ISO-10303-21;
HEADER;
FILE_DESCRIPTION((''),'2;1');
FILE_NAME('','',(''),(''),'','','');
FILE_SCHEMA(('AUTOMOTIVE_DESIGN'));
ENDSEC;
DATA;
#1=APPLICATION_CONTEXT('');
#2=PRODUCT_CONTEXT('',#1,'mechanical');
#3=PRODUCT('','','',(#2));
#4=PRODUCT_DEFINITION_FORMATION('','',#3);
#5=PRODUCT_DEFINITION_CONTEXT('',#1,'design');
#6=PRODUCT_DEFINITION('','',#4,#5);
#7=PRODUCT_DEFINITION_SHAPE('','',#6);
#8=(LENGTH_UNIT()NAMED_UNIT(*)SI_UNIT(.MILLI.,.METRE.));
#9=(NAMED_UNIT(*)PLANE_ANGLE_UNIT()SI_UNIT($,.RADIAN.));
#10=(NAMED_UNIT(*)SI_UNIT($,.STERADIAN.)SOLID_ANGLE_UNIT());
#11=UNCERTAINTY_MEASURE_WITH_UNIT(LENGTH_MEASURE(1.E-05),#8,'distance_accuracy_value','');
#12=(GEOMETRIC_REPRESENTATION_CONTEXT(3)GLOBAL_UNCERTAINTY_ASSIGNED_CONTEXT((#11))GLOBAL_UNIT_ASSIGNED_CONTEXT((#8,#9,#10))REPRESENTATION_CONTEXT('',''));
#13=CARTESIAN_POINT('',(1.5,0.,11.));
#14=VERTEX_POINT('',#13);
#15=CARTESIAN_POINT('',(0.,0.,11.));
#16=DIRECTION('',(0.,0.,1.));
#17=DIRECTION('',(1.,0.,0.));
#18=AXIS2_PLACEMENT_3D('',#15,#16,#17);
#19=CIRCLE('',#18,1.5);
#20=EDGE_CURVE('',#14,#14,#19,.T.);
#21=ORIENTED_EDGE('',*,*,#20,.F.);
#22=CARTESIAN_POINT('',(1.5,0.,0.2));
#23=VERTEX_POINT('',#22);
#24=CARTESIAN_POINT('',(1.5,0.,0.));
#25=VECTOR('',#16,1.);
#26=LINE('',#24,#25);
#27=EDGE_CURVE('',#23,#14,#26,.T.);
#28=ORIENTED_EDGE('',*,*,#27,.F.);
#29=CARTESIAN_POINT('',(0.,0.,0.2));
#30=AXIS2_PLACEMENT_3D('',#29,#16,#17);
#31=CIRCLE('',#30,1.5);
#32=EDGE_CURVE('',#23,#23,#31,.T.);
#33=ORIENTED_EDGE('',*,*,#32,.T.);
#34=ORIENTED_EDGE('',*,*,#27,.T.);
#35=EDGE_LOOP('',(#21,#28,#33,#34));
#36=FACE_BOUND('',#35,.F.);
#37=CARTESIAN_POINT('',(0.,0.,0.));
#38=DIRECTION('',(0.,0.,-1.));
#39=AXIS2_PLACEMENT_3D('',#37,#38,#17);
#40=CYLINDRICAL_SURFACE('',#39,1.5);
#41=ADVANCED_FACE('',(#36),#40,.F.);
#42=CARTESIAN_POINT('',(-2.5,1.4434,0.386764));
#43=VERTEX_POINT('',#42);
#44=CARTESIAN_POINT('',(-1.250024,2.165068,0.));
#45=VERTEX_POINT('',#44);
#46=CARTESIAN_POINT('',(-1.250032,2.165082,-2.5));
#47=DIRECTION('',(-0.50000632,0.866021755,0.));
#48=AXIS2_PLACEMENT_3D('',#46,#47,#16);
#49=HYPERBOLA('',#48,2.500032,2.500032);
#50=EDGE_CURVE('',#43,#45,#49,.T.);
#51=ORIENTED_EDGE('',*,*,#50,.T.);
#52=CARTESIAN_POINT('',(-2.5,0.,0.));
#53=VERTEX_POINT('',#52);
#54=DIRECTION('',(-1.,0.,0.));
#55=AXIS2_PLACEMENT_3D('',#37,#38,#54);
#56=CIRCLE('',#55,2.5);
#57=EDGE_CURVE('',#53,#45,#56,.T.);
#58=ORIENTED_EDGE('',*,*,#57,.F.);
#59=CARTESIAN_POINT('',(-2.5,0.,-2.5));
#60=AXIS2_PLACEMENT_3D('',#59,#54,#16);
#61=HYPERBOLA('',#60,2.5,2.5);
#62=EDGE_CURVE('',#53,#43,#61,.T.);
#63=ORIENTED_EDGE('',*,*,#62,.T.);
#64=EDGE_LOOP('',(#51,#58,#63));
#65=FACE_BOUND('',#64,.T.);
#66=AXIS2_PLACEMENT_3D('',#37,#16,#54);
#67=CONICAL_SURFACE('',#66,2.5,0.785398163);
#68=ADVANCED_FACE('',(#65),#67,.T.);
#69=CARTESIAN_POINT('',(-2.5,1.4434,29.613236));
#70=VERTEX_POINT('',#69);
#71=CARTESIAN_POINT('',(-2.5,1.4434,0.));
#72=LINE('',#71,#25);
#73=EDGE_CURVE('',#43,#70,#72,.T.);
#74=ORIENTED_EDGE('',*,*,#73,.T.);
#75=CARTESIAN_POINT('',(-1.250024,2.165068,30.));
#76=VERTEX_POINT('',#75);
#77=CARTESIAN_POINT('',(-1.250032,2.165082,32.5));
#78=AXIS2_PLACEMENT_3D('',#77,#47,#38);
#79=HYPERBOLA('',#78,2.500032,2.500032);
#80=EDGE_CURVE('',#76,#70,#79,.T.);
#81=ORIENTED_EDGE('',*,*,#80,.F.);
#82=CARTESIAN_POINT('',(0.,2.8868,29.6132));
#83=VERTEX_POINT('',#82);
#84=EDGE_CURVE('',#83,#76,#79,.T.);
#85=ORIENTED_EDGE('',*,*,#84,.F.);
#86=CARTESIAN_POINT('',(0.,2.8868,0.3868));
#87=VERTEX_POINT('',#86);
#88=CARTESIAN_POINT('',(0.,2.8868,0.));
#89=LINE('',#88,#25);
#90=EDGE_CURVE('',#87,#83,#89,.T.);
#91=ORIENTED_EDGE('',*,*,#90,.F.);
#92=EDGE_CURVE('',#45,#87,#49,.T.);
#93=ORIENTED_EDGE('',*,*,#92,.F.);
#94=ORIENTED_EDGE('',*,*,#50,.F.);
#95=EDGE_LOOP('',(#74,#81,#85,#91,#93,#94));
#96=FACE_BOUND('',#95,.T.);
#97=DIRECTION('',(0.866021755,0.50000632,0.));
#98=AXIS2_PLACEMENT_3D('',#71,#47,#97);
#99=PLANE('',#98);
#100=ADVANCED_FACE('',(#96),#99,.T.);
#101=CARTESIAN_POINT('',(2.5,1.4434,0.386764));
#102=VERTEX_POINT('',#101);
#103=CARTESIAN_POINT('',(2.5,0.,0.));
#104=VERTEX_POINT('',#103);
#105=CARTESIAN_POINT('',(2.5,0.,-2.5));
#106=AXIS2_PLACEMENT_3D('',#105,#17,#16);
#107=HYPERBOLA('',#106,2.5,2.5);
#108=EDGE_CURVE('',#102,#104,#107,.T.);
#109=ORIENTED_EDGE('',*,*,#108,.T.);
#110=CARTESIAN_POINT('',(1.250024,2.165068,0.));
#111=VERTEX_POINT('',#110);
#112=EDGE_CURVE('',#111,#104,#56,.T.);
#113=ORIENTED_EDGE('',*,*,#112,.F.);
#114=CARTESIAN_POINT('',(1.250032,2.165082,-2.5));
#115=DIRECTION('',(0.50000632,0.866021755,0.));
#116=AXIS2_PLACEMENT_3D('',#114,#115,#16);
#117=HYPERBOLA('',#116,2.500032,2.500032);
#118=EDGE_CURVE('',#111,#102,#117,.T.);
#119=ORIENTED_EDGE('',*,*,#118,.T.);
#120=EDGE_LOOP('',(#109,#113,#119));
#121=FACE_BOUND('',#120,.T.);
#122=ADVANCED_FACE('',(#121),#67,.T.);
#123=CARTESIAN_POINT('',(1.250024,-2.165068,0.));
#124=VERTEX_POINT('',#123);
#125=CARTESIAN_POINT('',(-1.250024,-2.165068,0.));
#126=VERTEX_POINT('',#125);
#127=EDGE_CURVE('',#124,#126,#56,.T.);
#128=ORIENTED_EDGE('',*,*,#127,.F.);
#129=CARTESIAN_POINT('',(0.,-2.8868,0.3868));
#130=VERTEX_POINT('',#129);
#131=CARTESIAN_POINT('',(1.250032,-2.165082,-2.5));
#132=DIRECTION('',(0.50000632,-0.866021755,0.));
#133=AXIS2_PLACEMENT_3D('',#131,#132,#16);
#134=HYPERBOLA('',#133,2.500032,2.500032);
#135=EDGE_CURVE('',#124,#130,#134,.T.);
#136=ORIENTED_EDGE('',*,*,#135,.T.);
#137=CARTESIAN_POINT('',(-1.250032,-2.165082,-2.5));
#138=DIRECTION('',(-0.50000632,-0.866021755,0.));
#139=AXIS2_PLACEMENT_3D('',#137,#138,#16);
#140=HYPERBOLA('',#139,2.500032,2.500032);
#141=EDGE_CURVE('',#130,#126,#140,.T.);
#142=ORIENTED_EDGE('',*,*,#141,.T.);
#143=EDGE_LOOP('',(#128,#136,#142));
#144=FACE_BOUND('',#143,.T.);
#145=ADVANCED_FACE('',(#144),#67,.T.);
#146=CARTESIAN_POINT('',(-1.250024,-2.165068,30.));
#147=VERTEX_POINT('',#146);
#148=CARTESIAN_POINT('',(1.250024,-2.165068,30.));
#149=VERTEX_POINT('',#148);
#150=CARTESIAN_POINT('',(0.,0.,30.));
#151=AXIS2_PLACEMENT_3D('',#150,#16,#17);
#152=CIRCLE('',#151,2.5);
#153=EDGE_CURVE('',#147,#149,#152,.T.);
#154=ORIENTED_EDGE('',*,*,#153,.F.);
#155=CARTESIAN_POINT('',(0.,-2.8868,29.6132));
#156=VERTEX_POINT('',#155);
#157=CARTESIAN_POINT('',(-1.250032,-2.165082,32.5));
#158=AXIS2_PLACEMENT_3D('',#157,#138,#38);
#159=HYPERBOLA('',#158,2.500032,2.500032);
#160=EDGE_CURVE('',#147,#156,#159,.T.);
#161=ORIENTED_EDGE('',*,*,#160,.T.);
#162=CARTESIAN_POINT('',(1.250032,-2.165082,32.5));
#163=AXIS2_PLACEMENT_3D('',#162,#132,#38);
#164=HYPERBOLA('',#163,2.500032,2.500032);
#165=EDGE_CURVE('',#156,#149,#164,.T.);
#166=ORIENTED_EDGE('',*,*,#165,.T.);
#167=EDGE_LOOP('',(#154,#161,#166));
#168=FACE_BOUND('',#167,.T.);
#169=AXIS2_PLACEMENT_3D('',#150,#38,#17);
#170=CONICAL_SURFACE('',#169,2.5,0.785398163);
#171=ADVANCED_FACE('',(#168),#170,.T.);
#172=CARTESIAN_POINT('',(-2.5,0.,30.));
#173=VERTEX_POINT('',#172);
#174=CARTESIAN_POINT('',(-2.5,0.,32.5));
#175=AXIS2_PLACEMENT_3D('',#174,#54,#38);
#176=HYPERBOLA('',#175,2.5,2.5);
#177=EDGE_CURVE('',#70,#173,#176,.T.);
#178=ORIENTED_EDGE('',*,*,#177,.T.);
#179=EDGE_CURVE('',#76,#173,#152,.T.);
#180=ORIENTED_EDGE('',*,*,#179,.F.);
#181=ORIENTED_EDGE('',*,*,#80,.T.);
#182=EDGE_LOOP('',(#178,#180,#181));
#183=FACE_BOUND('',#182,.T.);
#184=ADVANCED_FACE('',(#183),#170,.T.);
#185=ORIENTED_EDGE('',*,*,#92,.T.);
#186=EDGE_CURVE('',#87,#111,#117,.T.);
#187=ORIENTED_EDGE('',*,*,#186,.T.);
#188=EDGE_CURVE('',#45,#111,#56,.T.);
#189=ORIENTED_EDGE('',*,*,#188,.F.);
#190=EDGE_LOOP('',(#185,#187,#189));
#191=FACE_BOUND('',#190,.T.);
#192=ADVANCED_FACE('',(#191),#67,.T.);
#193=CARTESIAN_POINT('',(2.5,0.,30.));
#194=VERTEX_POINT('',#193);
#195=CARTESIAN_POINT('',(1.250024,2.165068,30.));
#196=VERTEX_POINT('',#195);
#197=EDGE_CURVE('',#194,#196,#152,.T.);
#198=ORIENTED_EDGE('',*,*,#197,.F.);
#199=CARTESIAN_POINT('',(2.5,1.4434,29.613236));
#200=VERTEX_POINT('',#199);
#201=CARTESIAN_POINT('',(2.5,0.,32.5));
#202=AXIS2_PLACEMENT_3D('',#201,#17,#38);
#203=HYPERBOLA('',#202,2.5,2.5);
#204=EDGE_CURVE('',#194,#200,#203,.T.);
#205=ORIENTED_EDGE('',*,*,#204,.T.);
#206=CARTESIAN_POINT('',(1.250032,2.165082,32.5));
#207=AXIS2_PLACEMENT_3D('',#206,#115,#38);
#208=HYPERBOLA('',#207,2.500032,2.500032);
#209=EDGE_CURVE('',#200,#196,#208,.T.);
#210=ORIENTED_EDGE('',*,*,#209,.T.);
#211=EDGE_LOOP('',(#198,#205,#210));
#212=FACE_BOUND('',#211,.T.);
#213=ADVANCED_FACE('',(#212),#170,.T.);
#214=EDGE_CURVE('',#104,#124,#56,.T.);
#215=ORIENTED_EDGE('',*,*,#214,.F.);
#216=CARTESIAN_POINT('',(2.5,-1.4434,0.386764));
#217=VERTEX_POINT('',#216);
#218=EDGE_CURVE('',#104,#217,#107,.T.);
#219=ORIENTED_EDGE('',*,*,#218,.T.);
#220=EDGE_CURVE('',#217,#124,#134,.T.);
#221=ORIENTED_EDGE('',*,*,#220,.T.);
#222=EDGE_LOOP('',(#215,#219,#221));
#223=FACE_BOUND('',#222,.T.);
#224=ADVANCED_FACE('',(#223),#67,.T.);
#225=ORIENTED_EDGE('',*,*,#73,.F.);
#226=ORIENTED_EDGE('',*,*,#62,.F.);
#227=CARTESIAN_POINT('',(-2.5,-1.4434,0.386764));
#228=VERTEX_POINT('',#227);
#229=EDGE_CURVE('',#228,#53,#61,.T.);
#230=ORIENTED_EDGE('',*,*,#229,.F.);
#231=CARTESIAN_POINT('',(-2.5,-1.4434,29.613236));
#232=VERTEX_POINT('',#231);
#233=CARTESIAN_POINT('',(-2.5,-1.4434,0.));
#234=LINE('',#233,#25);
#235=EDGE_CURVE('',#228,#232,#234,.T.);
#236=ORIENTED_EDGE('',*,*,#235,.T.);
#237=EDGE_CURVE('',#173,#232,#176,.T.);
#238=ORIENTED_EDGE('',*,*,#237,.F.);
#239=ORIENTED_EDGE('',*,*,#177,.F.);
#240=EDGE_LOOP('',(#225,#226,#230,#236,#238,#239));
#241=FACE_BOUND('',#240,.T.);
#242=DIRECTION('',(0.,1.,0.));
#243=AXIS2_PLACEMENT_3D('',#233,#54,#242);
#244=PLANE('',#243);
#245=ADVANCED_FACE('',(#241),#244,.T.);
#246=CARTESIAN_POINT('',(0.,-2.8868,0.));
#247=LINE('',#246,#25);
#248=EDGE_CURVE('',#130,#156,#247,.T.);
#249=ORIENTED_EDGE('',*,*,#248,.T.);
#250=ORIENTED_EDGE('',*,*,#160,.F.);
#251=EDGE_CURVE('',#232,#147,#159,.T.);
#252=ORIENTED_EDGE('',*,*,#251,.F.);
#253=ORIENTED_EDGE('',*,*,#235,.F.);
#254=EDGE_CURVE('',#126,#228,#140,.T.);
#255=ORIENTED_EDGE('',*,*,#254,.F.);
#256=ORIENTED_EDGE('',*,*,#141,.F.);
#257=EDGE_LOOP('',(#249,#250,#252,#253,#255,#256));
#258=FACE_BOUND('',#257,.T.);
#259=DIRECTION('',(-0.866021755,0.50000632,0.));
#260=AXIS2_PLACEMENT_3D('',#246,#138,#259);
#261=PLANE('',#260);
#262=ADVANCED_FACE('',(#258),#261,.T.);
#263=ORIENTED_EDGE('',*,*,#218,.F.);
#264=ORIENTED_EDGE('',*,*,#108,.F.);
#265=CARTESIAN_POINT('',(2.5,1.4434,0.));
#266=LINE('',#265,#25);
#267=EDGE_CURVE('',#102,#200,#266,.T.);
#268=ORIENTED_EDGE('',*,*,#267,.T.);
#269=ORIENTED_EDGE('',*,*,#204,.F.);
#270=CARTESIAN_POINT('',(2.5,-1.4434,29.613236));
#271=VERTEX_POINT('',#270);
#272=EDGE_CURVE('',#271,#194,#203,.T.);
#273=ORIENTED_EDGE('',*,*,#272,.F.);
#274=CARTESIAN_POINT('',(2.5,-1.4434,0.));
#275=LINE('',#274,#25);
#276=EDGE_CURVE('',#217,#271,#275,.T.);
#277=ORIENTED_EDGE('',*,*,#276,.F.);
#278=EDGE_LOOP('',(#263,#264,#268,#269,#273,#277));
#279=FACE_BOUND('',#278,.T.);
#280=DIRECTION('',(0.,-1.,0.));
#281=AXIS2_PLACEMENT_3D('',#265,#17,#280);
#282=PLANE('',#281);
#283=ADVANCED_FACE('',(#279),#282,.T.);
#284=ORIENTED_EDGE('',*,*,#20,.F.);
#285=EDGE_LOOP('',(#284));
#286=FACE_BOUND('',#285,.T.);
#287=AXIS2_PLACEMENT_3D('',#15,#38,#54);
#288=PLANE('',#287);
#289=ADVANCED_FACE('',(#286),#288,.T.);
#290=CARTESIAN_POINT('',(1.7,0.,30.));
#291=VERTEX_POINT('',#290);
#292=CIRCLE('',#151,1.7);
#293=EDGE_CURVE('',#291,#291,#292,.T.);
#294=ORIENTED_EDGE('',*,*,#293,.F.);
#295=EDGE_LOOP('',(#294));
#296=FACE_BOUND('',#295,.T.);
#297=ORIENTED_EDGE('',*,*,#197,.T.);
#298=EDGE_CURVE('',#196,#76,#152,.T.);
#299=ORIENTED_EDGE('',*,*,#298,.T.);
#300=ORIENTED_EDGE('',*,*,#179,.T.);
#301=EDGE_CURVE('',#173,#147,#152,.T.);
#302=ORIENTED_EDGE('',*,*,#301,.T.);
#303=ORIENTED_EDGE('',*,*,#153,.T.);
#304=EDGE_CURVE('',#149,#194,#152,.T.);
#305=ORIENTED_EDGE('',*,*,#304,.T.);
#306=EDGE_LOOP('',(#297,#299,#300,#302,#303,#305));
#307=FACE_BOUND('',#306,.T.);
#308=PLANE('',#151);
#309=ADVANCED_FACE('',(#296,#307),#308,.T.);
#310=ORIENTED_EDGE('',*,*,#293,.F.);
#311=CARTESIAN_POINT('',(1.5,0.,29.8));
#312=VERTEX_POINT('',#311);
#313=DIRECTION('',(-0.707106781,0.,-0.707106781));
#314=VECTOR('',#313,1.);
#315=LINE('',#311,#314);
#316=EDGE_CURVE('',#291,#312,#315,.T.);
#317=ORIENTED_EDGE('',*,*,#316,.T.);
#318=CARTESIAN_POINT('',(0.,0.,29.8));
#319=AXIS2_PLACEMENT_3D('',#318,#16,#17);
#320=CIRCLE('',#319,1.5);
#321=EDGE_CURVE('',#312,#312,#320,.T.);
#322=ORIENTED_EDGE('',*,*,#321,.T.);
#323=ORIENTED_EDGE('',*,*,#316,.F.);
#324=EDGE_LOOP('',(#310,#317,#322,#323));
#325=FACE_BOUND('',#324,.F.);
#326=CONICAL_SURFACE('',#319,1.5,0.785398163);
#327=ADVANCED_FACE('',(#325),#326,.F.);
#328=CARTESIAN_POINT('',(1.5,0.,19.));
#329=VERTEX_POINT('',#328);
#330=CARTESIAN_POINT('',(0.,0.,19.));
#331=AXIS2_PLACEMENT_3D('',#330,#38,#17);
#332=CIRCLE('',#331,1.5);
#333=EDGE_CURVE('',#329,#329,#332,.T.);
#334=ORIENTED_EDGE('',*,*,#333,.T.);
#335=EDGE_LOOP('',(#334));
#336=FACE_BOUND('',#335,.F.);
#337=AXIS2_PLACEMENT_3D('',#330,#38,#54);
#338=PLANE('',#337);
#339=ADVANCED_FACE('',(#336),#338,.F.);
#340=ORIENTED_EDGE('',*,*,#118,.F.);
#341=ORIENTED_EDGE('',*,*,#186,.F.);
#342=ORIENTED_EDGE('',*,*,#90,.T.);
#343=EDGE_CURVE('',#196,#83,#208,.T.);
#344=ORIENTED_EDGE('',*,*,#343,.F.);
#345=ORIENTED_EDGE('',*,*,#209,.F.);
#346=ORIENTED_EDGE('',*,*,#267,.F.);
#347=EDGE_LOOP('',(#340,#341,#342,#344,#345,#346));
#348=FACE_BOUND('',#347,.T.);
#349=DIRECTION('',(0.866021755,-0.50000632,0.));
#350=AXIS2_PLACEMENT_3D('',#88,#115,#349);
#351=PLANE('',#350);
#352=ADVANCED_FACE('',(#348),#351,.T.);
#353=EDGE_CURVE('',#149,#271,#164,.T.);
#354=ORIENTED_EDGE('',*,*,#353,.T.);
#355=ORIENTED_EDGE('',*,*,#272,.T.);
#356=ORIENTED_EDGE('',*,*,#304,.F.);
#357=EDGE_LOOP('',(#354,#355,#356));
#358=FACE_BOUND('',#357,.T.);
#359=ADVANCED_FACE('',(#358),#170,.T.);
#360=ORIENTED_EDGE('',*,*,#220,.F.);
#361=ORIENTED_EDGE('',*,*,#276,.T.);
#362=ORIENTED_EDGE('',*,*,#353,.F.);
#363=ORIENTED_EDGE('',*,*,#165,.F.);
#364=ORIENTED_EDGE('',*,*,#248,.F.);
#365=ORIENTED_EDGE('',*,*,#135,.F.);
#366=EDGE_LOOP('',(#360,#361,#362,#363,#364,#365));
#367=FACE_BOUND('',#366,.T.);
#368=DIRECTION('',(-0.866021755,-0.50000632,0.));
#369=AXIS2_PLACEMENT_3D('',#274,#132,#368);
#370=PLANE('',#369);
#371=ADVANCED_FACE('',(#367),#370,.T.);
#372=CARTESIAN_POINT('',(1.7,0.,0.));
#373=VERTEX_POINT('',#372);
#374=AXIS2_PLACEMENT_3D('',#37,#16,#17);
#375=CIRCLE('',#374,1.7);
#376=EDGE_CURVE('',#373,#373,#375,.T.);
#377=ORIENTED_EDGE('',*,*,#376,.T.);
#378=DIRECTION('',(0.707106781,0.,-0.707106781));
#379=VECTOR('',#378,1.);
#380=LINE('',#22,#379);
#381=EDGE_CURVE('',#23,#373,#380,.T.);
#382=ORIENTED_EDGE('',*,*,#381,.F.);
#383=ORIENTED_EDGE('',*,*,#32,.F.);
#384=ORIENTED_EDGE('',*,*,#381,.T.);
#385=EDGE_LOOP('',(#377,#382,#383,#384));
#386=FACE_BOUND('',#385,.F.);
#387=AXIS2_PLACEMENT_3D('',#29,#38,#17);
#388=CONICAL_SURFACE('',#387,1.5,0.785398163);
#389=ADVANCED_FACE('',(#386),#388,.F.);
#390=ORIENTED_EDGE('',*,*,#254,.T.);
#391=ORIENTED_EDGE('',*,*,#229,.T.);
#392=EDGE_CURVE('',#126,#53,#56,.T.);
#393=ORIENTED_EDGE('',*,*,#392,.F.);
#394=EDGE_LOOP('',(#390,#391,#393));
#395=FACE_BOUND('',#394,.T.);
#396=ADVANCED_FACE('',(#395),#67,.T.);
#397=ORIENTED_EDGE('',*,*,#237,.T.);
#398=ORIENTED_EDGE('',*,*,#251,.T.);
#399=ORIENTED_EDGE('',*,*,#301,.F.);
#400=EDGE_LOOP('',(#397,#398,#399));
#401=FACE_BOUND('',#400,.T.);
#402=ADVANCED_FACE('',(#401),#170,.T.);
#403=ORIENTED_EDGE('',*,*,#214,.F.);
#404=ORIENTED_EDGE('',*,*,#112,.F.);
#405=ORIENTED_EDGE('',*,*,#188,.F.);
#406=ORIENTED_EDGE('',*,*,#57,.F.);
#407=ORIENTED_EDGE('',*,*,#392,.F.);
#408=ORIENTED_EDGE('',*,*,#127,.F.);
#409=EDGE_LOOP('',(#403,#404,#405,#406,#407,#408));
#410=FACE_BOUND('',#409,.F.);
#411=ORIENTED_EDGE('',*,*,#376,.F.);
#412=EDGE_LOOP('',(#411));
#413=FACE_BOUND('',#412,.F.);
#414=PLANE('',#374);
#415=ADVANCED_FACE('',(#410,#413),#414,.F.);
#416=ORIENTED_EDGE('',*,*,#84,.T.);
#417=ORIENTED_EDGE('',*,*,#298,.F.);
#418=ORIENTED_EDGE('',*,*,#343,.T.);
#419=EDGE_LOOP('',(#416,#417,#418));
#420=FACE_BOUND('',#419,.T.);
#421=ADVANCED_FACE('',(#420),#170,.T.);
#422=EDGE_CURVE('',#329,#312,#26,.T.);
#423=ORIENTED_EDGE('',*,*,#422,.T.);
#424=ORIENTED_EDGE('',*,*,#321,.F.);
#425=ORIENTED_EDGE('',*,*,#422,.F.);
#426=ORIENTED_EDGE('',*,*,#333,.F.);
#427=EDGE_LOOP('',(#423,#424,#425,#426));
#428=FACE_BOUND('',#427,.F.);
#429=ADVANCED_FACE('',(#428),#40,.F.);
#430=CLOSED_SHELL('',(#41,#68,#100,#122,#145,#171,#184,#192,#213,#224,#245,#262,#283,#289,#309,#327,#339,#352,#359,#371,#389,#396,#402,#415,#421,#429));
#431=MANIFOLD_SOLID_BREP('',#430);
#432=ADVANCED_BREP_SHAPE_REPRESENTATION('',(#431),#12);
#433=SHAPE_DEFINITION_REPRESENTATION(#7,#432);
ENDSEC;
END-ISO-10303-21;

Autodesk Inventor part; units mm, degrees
ref_plane "YZ Plane" through (0, 0, 0) normal (1, 0, 0) x (0, 1, 0)
ref_plane "XZ Plane" through (0, 0, 0) normal (0, 1, 0) x (-1, 0, 0)
sketch "Náčrt1" plane through (0, 0, 0) normal (0, 0, 1) x (1, 0, 0)
  line L0 (2.5, -1.4434) -> (0, -2.8868)
  line L1 (0, -2.8868) -> (-2.5, -1.4434)
  line L2 (-2.5, -1.4434) -> (-2.5, 1.4434)
  line L3 (-2.5, 1.4434) -> (0, 2.8868)
  line L4 (0, 2.8868) -> (2.5, 1.4434)
  line L5 (2.5, 1.4434) -> (2.5, -1.4434)
  circle A0 centre (0, 0) radius 1.5
  point P0 (2.5, 0)
  dimension "d1" = 3
  dimension "d16" = 5
extrude "Vysunutí1" add sketch "Náčrt1" along normal blind 30
thread "Závit1" size "M3x0.5" class "6H" standard "ANSI Metric M Profile" full length
sketch "Náčrt2" plane through (0, 0, 30) normal (0, 0, 1) x (1, 0, 0)
  circle A0 centre (0, 0) radius 2.5
  dimension "d18" = 5
extrude "Vysunutí2" cut sketch "Náčrt2" against normal through all draft 45 keep common part
sketch "Náčrt3" plane through (0, 0, 0) normal (0, 0, -1) x (-1, 0, 0)
  circle A0 centre (0, 0) radius 2.5
  dimension "d17" = 5
extrude "Vysunutí3" cut sketch "Náčrt3" against normal through all draft 45 keep common part
chamfer "Zkosení1" distance 0.2 angle 45 1 edges at (-1.5, 0, 30)
chamfer "Zkosení2" distance 0.2 angle 45 1 edges at (-1.5, 0, 0)
ref_plane "Pracovní rovina1" through (0, 0, 15) normal (0, 0, -1) x (-1, 0, 0)
sketch "Náčrt4" plane through (-2.5, 1.4434, 29.6132) normal (-0.5, 0.8660254, 0) x (0.8660254, 0.5, 0)
  point P0 (1.4434, 29.6132)
sketch "Náčrt5" plane through (0, 0, 15) normal (0, 0, -1) x (-1, 0, 0)
  circle A0 centre (0, 0) radius 1.5
extrude "Vysunutí4" add sketch "Náčrt5" along normal mid plane 8
properties part number "PillarBolt-M3x30" material "Ocel, vysokopevnostní, nízkolegovaná"
